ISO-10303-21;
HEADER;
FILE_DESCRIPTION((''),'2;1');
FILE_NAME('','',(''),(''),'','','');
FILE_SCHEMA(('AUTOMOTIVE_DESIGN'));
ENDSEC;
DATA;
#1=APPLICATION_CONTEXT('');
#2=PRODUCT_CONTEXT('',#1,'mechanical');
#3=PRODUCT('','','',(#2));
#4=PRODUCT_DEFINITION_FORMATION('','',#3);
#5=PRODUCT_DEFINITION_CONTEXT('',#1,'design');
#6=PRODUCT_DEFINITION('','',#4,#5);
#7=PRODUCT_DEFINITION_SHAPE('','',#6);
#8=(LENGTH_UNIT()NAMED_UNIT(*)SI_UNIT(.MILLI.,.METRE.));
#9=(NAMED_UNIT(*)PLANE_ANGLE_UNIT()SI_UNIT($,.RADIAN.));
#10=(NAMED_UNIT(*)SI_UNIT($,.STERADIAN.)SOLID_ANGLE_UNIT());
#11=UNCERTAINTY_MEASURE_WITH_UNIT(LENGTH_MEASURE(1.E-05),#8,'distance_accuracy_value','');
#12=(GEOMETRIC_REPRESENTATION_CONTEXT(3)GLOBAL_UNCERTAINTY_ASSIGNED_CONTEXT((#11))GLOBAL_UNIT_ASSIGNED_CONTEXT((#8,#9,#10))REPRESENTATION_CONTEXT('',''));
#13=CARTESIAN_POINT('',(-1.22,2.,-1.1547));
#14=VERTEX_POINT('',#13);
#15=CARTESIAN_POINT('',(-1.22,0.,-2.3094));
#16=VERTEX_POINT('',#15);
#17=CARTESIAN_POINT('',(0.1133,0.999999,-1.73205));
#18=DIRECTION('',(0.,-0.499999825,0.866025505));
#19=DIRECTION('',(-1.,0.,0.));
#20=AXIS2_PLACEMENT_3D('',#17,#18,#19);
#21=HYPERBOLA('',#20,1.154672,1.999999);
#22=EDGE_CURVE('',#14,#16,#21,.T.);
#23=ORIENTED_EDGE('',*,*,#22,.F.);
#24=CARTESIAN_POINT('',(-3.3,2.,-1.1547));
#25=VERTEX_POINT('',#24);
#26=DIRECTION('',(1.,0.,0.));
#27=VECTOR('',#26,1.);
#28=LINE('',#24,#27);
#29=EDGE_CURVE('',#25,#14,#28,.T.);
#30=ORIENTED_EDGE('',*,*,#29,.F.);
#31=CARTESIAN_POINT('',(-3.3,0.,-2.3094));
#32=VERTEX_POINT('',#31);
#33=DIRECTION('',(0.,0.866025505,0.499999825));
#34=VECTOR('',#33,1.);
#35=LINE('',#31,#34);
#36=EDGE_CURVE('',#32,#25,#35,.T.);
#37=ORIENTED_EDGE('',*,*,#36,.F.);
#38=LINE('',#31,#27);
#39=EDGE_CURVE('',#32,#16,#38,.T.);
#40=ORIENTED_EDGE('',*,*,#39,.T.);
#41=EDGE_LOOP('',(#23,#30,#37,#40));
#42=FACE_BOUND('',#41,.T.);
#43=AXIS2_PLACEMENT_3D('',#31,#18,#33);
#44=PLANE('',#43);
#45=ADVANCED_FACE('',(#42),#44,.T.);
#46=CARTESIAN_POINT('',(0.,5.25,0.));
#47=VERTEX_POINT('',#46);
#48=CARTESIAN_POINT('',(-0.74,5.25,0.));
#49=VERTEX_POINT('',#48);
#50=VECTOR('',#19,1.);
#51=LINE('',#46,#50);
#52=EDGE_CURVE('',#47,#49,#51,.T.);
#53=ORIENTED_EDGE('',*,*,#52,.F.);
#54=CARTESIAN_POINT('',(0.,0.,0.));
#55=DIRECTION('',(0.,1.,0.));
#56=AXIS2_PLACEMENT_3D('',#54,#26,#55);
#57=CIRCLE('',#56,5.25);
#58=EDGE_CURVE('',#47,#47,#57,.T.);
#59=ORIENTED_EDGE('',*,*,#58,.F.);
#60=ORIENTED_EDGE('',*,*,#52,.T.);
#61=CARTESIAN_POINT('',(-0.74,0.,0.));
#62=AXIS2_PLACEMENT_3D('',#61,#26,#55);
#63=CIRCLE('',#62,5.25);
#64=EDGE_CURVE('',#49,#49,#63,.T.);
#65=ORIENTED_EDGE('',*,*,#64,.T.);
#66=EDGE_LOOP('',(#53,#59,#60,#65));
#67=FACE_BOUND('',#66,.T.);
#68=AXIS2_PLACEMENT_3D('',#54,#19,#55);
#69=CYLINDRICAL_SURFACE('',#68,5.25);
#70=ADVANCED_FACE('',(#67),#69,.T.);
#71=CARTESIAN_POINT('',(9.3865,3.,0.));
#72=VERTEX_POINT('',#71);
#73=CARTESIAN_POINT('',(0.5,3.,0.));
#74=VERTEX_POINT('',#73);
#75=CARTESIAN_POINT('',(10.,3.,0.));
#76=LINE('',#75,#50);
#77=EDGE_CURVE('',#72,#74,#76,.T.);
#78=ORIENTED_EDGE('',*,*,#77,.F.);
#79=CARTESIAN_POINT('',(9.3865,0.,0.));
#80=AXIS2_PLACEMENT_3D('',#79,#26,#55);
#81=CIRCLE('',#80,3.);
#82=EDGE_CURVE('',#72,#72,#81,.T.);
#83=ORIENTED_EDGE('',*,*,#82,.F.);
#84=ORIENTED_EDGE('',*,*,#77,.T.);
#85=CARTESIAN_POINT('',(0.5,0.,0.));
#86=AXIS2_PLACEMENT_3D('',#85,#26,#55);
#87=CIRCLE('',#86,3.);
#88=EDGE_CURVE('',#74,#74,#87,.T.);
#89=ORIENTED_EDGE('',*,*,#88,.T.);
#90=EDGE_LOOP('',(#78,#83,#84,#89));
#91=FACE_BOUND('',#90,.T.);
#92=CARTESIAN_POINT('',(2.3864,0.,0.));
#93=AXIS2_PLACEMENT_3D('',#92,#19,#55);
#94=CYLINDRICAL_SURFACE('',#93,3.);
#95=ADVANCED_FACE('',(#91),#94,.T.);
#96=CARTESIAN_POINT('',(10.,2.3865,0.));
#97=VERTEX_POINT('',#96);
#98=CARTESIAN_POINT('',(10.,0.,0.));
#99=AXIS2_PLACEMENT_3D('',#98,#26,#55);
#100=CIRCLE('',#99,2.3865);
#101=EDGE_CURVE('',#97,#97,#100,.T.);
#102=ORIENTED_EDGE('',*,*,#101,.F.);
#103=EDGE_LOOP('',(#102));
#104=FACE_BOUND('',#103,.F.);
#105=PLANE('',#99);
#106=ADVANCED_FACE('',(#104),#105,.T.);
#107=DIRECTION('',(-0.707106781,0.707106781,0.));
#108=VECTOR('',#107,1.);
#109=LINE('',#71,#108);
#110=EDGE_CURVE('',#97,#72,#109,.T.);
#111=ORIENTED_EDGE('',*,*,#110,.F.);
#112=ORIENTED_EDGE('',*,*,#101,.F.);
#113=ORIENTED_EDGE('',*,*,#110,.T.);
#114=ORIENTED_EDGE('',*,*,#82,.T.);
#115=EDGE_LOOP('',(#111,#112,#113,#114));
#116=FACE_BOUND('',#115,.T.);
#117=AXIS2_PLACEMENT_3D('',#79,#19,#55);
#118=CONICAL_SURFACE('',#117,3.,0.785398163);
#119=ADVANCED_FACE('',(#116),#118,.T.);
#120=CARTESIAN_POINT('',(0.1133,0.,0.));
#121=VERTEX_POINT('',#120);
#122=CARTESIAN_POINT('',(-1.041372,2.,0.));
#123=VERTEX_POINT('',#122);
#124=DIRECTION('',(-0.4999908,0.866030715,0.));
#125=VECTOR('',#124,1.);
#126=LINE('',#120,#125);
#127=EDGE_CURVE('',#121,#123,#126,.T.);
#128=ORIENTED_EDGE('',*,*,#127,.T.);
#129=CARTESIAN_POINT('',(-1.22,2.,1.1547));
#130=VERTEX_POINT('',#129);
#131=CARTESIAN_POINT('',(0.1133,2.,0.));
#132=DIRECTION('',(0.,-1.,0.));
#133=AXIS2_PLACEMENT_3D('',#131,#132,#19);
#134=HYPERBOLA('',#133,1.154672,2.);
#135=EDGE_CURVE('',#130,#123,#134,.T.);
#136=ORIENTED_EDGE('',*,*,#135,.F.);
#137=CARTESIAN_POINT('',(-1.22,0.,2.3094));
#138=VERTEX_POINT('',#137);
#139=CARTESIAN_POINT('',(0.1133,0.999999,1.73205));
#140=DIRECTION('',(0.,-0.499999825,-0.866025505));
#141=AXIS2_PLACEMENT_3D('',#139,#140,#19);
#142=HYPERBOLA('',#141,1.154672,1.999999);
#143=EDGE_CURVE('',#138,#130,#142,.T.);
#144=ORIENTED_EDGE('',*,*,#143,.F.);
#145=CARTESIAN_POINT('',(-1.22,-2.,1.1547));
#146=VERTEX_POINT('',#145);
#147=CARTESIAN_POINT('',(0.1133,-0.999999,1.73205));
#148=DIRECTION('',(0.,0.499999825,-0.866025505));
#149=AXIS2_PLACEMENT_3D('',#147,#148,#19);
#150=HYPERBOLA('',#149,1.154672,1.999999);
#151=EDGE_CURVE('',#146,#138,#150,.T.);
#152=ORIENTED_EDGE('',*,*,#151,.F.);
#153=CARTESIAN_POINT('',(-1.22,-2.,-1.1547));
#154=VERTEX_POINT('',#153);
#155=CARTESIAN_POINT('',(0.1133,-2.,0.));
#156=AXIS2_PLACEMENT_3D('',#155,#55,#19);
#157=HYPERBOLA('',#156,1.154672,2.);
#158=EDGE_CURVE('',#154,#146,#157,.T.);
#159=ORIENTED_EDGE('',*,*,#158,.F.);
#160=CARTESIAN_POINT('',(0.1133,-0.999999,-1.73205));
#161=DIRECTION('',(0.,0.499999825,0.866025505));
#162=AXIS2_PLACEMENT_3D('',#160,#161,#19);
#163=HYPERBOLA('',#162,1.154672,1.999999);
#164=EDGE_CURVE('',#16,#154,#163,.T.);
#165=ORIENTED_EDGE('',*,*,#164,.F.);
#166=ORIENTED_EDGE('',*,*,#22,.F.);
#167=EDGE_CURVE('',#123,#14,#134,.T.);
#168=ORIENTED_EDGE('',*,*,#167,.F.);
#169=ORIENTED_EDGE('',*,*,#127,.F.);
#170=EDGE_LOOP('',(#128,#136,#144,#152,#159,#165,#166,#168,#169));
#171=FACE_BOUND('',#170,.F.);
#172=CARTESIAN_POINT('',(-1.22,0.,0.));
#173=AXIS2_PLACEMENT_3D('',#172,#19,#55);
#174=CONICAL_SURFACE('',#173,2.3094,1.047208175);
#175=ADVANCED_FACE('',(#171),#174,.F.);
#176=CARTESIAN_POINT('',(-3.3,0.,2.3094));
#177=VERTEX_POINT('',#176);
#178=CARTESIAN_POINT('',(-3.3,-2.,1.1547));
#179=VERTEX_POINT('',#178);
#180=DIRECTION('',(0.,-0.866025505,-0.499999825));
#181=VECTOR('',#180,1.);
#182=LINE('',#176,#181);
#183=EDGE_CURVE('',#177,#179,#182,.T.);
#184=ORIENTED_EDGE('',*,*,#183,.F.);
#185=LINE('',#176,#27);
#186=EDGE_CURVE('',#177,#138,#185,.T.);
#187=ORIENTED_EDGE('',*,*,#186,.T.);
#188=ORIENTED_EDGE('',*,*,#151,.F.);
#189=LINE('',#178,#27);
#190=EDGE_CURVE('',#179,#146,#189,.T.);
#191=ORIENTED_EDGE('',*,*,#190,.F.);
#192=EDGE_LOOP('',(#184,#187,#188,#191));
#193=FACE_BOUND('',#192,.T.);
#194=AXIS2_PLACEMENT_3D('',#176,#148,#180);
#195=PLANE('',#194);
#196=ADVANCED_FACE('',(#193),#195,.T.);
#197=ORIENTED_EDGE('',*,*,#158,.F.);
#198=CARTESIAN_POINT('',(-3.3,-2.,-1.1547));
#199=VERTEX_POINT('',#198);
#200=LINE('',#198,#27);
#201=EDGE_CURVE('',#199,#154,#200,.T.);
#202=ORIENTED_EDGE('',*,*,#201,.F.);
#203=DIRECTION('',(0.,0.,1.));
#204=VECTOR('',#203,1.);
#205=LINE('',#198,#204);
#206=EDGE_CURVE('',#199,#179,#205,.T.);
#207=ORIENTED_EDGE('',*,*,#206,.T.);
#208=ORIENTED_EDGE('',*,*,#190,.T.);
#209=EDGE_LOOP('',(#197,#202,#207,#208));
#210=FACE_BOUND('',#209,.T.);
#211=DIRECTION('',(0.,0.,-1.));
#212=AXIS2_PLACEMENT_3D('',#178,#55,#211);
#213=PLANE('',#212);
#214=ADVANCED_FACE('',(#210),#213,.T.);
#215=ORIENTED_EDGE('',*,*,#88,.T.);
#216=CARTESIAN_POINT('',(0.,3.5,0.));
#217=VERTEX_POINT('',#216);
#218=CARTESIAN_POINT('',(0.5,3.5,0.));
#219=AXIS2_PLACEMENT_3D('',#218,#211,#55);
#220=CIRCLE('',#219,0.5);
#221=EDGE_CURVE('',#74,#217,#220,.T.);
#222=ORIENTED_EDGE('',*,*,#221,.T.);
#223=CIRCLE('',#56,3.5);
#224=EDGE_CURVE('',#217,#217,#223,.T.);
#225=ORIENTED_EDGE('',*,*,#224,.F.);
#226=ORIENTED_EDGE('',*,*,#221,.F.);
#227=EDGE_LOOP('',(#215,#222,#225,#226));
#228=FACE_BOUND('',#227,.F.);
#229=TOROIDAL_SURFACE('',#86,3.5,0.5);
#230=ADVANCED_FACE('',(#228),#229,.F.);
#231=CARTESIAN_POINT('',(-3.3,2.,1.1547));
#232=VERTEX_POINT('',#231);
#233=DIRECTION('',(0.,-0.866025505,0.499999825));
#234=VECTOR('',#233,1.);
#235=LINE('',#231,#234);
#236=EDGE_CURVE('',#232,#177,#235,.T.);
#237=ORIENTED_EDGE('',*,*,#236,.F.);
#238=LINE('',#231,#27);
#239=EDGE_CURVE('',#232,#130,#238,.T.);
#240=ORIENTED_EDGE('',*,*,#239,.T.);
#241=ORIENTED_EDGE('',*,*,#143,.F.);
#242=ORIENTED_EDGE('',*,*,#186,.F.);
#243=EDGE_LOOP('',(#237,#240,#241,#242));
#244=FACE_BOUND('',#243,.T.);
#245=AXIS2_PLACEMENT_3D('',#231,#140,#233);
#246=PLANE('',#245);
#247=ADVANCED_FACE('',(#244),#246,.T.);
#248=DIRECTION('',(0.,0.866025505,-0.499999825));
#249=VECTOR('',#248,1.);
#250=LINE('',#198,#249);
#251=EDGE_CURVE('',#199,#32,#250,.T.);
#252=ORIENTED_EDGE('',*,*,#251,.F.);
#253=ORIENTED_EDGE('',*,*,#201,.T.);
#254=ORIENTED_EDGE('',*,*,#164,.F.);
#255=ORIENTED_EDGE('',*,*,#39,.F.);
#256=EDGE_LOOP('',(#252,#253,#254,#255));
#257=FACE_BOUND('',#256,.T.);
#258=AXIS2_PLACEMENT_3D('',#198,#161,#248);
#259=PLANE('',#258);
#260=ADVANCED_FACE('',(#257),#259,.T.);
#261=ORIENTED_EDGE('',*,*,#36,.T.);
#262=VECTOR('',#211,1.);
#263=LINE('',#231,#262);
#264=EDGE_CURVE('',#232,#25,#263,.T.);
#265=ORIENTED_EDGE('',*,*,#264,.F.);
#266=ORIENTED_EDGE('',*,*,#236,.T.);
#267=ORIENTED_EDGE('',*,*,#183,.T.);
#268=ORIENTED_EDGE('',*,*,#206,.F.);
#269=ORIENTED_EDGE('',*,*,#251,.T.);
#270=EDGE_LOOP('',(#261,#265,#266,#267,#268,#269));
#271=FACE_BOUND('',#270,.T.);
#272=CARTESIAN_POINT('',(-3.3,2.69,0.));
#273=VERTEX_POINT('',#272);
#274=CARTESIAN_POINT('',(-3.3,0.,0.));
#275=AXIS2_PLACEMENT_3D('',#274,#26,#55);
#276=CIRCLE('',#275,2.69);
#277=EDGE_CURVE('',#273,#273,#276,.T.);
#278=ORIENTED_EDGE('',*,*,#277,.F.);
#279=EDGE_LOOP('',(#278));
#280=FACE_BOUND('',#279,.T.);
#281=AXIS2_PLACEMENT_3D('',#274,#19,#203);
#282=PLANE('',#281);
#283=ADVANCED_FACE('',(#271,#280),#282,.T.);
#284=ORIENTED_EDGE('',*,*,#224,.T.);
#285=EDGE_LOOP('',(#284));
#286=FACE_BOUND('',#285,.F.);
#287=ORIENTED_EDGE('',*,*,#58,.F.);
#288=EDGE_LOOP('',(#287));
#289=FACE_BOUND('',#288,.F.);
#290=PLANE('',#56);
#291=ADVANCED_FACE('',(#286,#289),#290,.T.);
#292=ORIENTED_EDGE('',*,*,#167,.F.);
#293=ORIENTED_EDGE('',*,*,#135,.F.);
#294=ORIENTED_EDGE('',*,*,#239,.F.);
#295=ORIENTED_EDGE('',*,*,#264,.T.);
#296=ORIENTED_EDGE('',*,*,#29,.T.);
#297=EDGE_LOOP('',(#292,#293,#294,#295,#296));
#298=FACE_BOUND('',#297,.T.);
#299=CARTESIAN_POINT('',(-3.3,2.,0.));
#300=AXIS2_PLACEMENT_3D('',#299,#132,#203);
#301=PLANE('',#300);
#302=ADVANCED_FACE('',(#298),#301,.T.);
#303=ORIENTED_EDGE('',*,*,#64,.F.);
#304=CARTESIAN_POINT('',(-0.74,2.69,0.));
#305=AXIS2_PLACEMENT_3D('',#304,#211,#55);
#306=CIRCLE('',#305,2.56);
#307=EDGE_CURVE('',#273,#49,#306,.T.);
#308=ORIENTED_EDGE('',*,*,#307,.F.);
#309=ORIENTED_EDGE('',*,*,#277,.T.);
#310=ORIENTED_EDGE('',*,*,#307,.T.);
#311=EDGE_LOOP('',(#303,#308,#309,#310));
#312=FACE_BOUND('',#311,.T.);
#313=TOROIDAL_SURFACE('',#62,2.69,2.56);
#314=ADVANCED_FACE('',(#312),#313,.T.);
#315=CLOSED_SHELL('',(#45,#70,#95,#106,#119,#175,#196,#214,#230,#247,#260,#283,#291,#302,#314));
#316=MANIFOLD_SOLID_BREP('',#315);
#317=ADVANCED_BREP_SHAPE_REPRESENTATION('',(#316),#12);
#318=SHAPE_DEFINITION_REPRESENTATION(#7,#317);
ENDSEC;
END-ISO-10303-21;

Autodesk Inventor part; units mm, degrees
ref_plane "YZ Plane" through (0, 0, 0) normal (1, 0, 0) x (0, 1, 0)
ref_plane "XZ Plane" through (0, 0, 0) normal (0, 1, 0) x (-1, 0, 0)
sketch "Эскиз1" plane through (0, 0, 0) normal (0, 0, 1) x (1, 0, 0)
  line L0 (0.1133, 0) -> (10, 0)
  line L1 (10, 0) -> (10, 3)
  line L2 (10, 3) -> (3, 3)
  line L3 (3, 3) -> (2.3864, 3)
  line L4 (2.3864, 3) -> (0, 3)
  line L5 (0, 3) -> (0, 5.25)
  line L6 (0, 5.25) -> (-3.3, 5.25)
  line L7 (-3.3, 5.25) -> (-3.3, 2.3094)
  line L8 (-3.3, 2.3094) -> (-1.22, 2.3094)
  line L9 (-1.22, 2.3094) -> (0.1133, 0)
  line L10 (-5.96, 0) -> (12.66, 0) projected
  line L11 (0, -1.05) -> (0, 6.3) projected
  line L12 (3, 3) -> (0, 3) construction
  dimension "d1" = 7
  dimension "d2" = 0.6136
  dimension "d3" = 3.3
  dimension "d4" = 2.08
  dimension "d5" = 60
  dimension "d6" = 6
  dimension "d7" = 6
  dimension "d8" = 4.6188
  dimension "d9" = 10.5
  dimension "d26" = 10
revolve "Базовый элемент" add sketch "Эскиз1" angle 360 about axis through (0.1133, 0, 0) along (1, 0, 0) contours L9 L11 L4 L3 L2 L1 L0 | L9 L8 L7 L6 L5 L11
sketch "Эскиз2" plane through (-3.3, 0, 0) normal (-1, 0, 0) x (0, 0, 1)
  circle A0 centre (0, 0) radius 2.3094 projected
  line L0 (0, -7.35) -> (0, 7.35) projected
  line L1 (-7.35, 0) -> (7.35, 0) projected
  line L2 (2.3094, 0) -> (1.1547, -2)
  line L3 (1.1547, -2) -> (-1.1547, -2)
  line L4 (-1.1547, -2) -> (-2.3094, 0)
  line L5 (-2.3094, 0) -> (-1.1547, 2)
  line L6 (-1.1547, 2) -> (1.1547, 2)
  line L7 (1.1547, 2) -> (2.3094, 0)
extrude "Паз" add sketch "Эскиз2" against normal up to next contours L7 A0 | A0 L2 | L6 L0 A0 | A0 L0 L3 | L0 L6 A0 | A0 L3 L0 | L4 A0 | A0 L5
fillet "Сопряжение1" radius 2.56 1 edges at (-3.3, -5.25, 0)
thread "Резьба" size "M6x1" class "6g" standard "ISO Metric profile" length 7
chamfer "Фаска1" distance 0.6135 distance2 0.6135 1 edges at (10, -3, 0) measured on face at (10, 0.705, 0.3049)
ref_plane "Work Plane1" through (29, 0, 0) normal (0, -1, 0) x (1, 0, 0)
fillet "Сопряжение2" radius 0.5 1 edges at (0, -3, 0)
equation "\"d17\" = RR"
equation "\"d13\" = GEL"
equation "\"d15\" = -0.5 * SPD + 0.5 * GD"
equation "\"d16\" = GUL"
equation "\"d30\" = R"
equation "\"d1\" = GEL"
equation "\"d3\" = KOH"
equation "\"d4\" = INTI"
equation "\"d6\" = GD"
equation "\"d7\" = BDM"
equation "\"d8\" = 1.1547 * SW"
equation "\"d9\" = KOD"
equation "\"d26\" = NLG"
equation "\"GD\" = NND"
equation "\"NLG\" = 10"
equation "\"GEL\" = 7"
equation "\"KOD\" = 10.5"
equation "\"KOH\" = 3.3"
equation "\"INTI\" = 2.08"
equation "\"GAL\" = 0.61345 * PTC"
equation "\"GUL\" = 0.61345 * PTC"
equation "\"BDM\" = NND"
equation "\"SW\" = 4"
equation "\"RR\" = 2.56"
equation "\"SPD\" = NND - 1.2269 * PTC"
equation "\"R\" = 0.5"
equation "\"TOA\" = 30deg"
equation "\"GD1\" = THREADDIA - 1.2269 * PTC"
equation "\"THREADDIA\" = 6"
equation "\"PTC\" = 1"
equation "\"NND\" = 6"
equation "\"KOH1\" = 0.74"
equation "\"E0\" = 4.583"
properties part number "ISO 7380-1 - M6 x 10" material "Сталь"
